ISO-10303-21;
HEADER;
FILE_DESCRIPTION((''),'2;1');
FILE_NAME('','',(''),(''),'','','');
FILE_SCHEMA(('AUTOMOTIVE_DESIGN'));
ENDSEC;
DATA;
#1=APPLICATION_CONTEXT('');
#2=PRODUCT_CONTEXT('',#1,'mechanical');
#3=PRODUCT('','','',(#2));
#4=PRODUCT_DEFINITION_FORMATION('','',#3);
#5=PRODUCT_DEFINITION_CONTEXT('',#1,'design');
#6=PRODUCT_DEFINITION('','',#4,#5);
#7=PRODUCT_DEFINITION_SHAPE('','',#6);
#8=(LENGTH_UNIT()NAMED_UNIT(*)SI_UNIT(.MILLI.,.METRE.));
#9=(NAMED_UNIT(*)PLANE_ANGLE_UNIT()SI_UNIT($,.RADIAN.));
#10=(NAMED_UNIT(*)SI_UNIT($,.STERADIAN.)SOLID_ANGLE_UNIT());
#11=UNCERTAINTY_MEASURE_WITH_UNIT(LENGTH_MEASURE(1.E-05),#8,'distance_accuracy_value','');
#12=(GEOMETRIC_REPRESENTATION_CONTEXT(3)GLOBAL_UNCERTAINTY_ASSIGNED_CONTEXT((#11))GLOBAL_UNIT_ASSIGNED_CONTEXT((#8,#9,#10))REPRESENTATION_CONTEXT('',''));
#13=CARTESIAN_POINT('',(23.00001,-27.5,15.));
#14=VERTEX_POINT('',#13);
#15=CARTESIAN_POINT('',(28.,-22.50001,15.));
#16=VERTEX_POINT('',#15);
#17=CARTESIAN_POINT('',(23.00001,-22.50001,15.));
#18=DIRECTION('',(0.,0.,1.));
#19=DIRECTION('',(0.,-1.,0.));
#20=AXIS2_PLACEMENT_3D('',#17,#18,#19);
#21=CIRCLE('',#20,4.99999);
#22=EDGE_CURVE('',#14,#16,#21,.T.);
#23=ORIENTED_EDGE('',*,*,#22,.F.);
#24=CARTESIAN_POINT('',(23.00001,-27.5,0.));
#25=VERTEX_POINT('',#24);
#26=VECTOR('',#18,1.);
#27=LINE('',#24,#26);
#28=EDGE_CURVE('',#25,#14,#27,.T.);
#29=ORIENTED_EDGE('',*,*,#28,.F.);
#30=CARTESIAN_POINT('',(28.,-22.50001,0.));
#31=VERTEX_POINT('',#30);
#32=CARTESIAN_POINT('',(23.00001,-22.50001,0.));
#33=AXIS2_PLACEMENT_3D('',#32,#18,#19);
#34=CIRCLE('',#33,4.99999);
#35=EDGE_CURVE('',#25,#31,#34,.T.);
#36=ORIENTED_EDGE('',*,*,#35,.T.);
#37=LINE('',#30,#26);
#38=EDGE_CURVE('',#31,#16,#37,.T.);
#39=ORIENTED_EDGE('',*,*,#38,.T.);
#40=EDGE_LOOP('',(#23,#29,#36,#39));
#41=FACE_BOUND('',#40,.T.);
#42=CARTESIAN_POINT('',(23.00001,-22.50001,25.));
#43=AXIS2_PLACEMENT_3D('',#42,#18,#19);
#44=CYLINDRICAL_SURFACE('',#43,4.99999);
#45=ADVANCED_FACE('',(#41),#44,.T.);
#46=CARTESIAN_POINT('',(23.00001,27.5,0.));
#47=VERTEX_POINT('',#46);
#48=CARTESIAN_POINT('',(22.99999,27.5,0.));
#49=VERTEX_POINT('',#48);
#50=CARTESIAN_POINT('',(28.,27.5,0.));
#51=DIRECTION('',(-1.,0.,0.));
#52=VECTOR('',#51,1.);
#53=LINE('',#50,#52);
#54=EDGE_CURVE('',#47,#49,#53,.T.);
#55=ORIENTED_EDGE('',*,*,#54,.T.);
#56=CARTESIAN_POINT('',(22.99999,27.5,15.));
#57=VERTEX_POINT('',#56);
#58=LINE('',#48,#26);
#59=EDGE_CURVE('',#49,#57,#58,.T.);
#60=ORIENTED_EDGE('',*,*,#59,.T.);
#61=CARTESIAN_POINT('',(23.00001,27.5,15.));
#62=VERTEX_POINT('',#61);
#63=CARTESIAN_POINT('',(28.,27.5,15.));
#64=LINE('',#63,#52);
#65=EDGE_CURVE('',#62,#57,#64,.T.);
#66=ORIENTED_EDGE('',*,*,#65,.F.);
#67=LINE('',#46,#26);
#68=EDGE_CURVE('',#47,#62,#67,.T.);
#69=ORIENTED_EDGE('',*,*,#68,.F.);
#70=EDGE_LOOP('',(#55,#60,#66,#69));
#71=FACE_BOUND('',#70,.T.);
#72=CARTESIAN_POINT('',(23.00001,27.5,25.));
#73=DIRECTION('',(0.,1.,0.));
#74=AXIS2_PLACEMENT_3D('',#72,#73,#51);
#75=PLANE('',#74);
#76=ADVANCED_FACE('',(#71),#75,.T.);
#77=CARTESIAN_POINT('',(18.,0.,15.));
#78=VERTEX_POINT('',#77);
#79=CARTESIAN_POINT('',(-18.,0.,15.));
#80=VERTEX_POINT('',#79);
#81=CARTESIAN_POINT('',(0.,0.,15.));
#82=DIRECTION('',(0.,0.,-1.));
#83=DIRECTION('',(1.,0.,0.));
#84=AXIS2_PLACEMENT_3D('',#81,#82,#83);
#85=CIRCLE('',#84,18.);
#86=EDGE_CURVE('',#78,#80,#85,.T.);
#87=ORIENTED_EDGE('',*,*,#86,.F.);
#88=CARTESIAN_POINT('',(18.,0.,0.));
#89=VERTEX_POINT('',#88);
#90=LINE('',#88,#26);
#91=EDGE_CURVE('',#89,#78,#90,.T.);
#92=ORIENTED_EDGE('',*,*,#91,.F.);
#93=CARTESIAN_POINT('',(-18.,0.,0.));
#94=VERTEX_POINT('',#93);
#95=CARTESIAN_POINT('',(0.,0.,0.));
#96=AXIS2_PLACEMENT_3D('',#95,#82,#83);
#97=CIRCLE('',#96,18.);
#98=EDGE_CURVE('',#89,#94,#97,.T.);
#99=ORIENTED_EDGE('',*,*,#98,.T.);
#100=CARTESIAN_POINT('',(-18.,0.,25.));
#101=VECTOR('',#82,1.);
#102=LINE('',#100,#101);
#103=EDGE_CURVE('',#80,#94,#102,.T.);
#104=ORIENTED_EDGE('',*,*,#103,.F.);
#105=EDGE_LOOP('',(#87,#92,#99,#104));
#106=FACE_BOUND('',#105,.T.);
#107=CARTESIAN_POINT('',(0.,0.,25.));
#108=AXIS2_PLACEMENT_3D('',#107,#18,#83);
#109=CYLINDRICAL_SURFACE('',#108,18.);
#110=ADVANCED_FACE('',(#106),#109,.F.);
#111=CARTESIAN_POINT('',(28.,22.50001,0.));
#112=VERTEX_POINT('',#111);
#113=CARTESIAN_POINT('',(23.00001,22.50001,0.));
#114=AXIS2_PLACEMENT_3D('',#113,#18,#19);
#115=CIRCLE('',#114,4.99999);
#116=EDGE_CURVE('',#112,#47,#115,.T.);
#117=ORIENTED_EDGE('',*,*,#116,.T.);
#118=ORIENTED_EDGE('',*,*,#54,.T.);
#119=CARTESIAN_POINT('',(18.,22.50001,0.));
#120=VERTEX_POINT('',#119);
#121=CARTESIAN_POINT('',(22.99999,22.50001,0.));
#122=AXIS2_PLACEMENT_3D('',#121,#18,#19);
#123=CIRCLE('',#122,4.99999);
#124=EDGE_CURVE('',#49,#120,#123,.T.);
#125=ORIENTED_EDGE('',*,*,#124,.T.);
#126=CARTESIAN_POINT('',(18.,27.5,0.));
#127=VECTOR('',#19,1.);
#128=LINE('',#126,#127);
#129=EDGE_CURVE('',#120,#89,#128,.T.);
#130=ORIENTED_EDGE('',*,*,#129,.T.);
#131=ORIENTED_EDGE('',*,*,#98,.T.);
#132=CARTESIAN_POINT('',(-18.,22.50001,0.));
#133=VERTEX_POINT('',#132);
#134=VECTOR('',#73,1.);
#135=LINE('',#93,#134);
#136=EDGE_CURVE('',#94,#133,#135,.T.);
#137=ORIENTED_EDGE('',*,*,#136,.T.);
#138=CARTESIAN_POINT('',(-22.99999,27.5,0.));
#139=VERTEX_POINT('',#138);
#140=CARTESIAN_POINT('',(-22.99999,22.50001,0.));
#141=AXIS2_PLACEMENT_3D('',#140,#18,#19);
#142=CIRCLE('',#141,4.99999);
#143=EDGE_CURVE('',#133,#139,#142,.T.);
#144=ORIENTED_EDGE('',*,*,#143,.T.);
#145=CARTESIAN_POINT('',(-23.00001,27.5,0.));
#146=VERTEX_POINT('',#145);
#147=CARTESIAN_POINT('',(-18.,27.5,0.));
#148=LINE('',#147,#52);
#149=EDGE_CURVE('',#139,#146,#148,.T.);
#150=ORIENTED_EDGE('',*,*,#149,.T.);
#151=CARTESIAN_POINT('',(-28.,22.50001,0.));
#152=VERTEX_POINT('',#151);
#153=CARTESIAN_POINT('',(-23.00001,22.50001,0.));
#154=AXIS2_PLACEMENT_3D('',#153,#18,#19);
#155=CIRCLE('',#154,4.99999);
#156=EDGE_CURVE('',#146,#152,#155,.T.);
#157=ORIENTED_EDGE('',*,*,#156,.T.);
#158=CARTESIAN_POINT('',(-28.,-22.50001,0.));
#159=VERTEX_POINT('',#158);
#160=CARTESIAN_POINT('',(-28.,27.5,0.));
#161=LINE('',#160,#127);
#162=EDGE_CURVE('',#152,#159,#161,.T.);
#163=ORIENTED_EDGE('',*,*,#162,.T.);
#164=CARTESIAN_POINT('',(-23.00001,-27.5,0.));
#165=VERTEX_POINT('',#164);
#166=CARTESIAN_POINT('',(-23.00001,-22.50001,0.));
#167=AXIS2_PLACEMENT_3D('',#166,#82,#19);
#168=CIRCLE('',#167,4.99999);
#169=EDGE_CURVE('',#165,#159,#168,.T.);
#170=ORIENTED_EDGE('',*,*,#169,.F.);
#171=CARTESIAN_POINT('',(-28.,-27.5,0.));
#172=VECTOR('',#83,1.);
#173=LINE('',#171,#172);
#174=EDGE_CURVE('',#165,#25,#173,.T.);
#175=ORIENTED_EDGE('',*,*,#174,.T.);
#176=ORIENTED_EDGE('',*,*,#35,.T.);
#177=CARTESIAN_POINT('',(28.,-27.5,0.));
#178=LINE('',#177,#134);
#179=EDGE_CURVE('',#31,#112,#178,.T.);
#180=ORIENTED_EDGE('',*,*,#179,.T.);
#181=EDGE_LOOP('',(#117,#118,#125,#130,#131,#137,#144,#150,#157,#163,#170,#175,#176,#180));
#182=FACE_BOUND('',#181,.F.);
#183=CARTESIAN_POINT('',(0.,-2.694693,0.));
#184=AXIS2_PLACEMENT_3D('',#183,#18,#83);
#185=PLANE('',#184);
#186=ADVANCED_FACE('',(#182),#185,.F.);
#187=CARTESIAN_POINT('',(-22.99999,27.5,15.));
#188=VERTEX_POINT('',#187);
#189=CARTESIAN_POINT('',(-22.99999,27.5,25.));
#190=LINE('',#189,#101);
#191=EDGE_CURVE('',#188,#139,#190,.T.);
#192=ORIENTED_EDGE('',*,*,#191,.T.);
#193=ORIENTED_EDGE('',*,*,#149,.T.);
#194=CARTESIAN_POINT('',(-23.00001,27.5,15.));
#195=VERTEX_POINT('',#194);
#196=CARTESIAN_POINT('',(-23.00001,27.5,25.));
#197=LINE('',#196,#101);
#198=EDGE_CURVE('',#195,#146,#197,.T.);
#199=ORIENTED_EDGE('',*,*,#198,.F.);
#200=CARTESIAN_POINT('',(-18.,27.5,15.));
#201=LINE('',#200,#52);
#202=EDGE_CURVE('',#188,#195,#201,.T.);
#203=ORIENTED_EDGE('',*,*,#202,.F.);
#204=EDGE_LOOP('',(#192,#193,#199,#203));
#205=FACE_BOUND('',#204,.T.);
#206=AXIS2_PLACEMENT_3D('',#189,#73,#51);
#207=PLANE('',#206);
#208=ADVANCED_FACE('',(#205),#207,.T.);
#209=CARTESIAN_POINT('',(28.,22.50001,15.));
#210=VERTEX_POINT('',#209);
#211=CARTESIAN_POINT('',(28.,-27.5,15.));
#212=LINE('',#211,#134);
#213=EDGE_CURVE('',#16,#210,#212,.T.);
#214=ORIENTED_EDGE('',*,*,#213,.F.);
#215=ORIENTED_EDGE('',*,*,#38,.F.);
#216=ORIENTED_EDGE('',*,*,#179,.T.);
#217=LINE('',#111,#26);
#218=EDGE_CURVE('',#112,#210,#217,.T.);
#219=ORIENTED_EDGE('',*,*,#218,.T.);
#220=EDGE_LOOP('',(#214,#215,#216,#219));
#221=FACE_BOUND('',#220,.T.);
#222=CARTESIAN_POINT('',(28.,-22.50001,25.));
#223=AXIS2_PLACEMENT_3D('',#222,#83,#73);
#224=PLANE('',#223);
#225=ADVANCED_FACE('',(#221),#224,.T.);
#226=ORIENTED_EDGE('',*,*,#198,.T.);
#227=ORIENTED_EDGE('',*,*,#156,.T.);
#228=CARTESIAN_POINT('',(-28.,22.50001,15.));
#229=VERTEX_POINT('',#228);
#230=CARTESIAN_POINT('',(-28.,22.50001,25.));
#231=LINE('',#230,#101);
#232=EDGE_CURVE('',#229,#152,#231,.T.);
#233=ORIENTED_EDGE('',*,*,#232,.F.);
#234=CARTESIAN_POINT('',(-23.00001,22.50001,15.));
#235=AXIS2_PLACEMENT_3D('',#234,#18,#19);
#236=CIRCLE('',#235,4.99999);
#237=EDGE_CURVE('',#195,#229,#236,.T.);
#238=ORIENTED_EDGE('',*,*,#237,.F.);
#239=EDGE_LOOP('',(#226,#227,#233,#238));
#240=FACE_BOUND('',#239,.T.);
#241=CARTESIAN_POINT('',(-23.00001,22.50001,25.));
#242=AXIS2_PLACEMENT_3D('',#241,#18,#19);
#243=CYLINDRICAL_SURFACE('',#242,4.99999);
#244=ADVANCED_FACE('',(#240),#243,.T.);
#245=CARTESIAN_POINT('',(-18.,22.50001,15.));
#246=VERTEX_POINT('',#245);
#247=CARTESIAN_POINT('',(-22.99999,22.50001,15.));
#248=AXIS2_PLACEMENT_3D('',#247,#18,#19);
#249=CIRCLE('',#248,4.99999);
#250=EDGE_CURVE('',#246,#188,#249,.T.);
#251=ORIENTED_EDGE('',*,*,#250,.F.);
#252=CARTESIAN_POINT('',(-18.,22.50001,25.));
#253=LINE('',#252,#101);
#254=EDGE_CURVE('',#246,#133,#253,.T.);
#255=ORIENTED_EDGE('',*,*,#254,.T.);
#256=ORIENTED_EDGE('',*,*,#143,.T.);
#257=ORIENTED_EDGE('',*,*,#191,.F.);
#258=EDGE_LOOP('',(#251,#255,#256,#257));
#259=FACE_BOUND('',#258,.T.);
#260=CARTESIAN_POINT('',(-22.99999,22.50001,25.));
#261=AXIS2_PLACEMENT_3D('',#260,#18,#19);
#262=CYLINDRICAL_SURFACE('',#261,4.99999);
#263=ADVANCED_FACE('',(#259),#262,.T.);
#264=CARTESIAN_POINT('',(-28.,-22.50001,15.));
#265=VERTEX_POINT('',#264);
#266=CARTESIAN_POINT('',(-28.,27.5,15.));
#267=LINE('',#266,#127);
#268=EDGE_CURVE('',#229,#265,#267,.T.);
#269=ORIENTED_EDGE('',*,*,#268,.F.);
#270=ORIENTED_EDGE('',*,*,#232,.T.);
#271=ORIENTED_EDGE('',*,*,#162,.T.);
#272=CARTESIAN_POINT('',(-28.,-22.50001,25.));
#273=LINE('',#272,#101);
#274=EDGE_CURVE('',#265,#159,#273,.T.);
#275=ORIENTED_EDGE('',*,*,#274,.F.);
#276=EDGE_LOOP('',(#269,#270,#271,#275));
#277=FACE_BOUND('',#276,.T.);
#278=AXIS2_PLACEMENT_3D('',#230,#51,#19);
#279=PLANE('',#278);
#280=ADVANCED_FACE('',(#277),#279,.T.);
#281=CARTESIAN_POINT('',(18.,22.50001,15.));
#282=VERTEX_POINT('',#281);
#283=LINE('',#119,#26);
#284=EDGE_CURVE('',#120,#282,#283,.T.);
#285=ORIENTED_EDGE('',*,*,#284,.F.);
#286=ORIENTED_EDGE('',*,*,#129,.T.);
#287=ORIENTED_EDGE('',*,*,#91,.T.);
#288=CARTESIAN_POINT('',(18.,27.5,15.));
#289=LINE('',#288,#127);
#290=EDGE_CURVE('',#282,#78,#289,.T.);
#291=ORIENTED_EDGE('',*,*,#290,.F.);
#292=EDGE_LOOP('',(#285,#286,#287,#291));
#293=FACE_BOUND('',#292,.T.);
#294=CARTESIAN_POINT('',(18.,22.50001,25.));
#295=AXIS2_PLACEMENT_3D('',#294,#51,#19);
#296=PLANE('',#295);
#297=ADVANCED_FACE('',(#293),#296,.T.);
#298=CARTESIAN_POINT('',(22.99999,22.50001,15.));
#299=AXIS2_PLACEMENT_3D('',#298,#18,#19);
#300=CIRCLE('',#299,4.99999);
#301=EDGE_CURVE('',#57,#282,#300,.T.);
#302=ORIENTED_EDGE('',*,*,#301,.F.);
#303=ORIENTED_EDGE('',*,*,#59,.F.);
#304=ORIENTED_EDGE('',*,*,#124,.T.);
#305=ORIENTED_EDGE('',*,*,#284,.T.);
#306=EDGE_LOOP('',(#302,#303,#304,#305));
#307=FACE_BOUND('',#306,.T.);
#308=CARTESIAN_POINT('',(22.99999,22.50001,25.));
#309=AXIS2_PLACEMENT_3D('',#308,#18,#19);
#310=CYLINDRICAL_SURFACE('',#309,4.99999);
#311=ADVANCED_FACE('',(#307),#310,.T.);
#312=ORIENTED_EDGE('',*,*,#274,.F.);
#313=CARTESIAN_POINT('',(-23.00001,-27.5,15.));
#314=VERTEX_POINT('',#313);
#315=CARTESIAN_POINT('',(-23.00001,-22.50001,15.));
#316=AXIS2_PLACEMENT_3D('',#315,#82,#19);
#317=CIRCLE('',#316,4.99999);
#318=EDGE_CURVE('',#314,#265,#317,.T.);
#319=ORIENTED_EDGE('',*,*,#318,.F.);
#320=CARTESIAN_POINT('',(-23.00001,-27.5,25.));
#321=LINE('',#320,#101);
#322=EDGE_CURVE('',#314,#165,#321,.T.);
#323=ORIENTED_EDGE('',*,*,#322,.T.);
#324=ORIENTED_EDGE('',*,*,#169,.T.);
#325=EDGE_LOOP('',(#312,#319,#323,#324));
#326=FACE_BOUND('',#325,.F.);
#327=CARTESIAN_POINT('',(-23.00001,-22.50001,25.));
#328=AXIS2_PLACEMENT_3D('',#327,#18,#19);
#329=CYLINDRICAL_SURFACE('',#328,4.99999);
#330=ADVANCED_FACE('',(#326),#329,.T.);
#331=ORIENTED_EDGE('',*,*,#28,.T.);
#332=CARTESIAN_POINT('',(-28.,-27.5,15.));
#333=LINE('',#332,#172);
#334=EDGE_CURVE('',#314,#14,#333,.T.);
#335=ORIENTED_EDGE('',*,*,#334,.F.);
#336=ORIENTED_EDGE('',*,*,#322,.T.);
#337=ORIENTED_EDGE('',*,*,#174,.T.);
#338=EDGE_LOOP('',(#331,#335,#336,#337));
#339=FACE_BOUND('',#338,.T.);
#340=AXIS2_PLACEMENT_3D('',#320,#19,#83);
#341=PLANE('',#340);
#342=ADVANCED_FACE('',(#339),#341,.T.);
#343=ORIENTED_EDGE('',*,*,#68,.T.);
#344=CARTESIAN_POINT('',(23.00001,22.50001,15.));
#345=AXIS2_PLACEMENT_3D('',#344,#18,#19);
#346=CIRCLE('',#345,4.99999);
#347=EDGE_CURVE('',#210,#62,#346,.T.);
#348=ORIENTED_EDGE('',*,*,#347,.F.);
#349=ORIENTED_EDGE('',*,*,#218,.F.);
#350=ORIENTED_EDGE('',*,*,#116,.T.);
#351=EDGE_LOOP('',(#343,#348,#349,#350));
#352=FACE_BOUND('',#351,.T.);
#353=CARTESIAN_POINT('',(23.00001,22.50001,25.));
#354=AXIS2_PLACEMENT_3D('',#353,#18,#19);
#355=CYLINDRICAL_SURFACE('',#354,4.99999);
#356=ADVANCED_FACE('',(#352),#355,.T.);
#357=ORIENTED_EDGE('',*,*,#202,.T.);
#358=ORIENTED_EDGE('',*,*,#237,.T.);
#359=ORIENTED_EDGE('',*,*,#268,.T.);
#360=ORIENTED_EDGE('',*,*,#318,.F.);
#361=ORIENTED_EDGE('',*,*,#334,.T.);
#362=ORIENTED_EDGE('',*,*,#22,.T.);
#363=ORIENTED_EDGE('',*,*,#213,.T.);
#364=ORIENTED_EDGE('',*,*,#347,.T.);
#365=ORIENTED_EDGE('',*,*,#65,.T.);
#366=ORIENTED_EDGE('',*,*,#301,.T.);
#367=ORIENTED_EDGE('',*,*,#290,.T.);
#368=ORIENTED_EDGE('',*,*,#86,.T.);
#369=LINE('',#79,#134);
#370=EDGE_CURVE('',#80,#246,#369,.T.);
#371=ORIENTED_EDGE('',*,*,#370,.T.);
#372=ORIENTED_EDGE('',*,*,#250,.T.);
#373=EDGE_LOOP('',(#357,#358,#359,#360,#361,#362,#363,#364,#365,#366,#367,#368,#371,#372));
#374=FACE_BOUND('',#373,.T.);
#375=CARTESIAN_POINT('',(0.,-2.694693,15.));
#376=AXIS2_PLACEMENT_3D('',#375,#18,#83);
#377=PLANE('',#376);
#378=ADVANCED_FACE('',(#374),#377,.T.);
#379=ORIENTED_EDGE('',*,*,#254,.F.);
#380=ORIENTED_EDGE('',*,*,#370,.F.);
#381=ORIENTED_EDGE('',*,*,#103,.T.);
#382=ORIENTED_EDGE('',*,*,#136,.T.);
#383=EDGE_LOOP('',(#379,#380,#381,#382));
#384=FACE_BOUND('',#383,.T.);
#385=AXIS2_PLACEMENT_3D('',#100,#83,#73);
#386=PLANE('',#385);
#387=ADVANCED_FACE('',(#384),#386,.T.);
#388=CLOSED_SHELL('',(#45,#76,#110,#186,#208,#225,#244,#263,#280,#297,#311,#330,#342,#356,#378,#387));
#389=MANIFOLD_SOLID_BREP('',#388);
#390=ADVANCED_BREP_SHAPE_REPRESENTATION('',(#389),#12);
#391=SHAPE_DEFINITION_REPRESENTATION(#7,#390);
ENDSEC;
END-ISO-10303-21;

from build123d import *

# Parameters (mm, degrees)
F1_DEPTH = 25
F2_R     = 4.99999
F3_DEPTH = 15
F4_DEPTH = 10


# Not quite as in the source:
# - a fillet or chamfer is up to 0.001 mm smaller than in the source, because OpenCascade refuses the exact size


with BuildPart() as f1:
    # F0 (on Top) → F1 (new body)
    with BuildSketch(Plane.XY):
        with BuildLine():
            Line((-28, -27.5), (28, -27.5))
            Line((28, -27.5), (28, 27.5))
            Line((28, 27.5), (18, 27.5))
            Line((18, 27.5), (18, 0))
            ThreePointArc((18, 0), (0, -18), (-18, 0))
            Line((-18, 0), (-18, 27.5))
            Line((-18, 27.5), (-28, 27.5))
            Line((-28, 27.5), (-28, -27.5))
        make_face()
    extrude(amount=F1_DEPTH)

    # F2 (radius 5 in the source; OpenCascade refuses exactly that, so slightly less here)
    f2_edges = [f1.edges().sort_by_distance(p)[0] for p in [
        (18, 27.5, 12.5),
        (-18, 27.5, 12.5),
        (28, 27.5, 12.5),
        (-28, 27.5, 12.5),
        (-28, -27.5, 12.5),
        (28, -27.5, 12.5),
    ]]
    fillet(f2_edges, radius=F2_R)

    # F3 (add): a face of the model
    f3_faces = [f1.faces().sort_by_distance(p)[0] for p in [
        (0, -26.7150796219, 25),
    ]]
    extrude(f3_faces, amount=-F3_DEPTH)

    # F4 (cut): a face of the model
    f4_faces = [f1.faces().sort_by_distance(p)[0] for p in [
        (0, -26.7150796219, 25),
    ]]
    extrude(f4_faces, amount=-F4_DEPTH, mode=Mode.SUBTRACT)


solid = f1.part
